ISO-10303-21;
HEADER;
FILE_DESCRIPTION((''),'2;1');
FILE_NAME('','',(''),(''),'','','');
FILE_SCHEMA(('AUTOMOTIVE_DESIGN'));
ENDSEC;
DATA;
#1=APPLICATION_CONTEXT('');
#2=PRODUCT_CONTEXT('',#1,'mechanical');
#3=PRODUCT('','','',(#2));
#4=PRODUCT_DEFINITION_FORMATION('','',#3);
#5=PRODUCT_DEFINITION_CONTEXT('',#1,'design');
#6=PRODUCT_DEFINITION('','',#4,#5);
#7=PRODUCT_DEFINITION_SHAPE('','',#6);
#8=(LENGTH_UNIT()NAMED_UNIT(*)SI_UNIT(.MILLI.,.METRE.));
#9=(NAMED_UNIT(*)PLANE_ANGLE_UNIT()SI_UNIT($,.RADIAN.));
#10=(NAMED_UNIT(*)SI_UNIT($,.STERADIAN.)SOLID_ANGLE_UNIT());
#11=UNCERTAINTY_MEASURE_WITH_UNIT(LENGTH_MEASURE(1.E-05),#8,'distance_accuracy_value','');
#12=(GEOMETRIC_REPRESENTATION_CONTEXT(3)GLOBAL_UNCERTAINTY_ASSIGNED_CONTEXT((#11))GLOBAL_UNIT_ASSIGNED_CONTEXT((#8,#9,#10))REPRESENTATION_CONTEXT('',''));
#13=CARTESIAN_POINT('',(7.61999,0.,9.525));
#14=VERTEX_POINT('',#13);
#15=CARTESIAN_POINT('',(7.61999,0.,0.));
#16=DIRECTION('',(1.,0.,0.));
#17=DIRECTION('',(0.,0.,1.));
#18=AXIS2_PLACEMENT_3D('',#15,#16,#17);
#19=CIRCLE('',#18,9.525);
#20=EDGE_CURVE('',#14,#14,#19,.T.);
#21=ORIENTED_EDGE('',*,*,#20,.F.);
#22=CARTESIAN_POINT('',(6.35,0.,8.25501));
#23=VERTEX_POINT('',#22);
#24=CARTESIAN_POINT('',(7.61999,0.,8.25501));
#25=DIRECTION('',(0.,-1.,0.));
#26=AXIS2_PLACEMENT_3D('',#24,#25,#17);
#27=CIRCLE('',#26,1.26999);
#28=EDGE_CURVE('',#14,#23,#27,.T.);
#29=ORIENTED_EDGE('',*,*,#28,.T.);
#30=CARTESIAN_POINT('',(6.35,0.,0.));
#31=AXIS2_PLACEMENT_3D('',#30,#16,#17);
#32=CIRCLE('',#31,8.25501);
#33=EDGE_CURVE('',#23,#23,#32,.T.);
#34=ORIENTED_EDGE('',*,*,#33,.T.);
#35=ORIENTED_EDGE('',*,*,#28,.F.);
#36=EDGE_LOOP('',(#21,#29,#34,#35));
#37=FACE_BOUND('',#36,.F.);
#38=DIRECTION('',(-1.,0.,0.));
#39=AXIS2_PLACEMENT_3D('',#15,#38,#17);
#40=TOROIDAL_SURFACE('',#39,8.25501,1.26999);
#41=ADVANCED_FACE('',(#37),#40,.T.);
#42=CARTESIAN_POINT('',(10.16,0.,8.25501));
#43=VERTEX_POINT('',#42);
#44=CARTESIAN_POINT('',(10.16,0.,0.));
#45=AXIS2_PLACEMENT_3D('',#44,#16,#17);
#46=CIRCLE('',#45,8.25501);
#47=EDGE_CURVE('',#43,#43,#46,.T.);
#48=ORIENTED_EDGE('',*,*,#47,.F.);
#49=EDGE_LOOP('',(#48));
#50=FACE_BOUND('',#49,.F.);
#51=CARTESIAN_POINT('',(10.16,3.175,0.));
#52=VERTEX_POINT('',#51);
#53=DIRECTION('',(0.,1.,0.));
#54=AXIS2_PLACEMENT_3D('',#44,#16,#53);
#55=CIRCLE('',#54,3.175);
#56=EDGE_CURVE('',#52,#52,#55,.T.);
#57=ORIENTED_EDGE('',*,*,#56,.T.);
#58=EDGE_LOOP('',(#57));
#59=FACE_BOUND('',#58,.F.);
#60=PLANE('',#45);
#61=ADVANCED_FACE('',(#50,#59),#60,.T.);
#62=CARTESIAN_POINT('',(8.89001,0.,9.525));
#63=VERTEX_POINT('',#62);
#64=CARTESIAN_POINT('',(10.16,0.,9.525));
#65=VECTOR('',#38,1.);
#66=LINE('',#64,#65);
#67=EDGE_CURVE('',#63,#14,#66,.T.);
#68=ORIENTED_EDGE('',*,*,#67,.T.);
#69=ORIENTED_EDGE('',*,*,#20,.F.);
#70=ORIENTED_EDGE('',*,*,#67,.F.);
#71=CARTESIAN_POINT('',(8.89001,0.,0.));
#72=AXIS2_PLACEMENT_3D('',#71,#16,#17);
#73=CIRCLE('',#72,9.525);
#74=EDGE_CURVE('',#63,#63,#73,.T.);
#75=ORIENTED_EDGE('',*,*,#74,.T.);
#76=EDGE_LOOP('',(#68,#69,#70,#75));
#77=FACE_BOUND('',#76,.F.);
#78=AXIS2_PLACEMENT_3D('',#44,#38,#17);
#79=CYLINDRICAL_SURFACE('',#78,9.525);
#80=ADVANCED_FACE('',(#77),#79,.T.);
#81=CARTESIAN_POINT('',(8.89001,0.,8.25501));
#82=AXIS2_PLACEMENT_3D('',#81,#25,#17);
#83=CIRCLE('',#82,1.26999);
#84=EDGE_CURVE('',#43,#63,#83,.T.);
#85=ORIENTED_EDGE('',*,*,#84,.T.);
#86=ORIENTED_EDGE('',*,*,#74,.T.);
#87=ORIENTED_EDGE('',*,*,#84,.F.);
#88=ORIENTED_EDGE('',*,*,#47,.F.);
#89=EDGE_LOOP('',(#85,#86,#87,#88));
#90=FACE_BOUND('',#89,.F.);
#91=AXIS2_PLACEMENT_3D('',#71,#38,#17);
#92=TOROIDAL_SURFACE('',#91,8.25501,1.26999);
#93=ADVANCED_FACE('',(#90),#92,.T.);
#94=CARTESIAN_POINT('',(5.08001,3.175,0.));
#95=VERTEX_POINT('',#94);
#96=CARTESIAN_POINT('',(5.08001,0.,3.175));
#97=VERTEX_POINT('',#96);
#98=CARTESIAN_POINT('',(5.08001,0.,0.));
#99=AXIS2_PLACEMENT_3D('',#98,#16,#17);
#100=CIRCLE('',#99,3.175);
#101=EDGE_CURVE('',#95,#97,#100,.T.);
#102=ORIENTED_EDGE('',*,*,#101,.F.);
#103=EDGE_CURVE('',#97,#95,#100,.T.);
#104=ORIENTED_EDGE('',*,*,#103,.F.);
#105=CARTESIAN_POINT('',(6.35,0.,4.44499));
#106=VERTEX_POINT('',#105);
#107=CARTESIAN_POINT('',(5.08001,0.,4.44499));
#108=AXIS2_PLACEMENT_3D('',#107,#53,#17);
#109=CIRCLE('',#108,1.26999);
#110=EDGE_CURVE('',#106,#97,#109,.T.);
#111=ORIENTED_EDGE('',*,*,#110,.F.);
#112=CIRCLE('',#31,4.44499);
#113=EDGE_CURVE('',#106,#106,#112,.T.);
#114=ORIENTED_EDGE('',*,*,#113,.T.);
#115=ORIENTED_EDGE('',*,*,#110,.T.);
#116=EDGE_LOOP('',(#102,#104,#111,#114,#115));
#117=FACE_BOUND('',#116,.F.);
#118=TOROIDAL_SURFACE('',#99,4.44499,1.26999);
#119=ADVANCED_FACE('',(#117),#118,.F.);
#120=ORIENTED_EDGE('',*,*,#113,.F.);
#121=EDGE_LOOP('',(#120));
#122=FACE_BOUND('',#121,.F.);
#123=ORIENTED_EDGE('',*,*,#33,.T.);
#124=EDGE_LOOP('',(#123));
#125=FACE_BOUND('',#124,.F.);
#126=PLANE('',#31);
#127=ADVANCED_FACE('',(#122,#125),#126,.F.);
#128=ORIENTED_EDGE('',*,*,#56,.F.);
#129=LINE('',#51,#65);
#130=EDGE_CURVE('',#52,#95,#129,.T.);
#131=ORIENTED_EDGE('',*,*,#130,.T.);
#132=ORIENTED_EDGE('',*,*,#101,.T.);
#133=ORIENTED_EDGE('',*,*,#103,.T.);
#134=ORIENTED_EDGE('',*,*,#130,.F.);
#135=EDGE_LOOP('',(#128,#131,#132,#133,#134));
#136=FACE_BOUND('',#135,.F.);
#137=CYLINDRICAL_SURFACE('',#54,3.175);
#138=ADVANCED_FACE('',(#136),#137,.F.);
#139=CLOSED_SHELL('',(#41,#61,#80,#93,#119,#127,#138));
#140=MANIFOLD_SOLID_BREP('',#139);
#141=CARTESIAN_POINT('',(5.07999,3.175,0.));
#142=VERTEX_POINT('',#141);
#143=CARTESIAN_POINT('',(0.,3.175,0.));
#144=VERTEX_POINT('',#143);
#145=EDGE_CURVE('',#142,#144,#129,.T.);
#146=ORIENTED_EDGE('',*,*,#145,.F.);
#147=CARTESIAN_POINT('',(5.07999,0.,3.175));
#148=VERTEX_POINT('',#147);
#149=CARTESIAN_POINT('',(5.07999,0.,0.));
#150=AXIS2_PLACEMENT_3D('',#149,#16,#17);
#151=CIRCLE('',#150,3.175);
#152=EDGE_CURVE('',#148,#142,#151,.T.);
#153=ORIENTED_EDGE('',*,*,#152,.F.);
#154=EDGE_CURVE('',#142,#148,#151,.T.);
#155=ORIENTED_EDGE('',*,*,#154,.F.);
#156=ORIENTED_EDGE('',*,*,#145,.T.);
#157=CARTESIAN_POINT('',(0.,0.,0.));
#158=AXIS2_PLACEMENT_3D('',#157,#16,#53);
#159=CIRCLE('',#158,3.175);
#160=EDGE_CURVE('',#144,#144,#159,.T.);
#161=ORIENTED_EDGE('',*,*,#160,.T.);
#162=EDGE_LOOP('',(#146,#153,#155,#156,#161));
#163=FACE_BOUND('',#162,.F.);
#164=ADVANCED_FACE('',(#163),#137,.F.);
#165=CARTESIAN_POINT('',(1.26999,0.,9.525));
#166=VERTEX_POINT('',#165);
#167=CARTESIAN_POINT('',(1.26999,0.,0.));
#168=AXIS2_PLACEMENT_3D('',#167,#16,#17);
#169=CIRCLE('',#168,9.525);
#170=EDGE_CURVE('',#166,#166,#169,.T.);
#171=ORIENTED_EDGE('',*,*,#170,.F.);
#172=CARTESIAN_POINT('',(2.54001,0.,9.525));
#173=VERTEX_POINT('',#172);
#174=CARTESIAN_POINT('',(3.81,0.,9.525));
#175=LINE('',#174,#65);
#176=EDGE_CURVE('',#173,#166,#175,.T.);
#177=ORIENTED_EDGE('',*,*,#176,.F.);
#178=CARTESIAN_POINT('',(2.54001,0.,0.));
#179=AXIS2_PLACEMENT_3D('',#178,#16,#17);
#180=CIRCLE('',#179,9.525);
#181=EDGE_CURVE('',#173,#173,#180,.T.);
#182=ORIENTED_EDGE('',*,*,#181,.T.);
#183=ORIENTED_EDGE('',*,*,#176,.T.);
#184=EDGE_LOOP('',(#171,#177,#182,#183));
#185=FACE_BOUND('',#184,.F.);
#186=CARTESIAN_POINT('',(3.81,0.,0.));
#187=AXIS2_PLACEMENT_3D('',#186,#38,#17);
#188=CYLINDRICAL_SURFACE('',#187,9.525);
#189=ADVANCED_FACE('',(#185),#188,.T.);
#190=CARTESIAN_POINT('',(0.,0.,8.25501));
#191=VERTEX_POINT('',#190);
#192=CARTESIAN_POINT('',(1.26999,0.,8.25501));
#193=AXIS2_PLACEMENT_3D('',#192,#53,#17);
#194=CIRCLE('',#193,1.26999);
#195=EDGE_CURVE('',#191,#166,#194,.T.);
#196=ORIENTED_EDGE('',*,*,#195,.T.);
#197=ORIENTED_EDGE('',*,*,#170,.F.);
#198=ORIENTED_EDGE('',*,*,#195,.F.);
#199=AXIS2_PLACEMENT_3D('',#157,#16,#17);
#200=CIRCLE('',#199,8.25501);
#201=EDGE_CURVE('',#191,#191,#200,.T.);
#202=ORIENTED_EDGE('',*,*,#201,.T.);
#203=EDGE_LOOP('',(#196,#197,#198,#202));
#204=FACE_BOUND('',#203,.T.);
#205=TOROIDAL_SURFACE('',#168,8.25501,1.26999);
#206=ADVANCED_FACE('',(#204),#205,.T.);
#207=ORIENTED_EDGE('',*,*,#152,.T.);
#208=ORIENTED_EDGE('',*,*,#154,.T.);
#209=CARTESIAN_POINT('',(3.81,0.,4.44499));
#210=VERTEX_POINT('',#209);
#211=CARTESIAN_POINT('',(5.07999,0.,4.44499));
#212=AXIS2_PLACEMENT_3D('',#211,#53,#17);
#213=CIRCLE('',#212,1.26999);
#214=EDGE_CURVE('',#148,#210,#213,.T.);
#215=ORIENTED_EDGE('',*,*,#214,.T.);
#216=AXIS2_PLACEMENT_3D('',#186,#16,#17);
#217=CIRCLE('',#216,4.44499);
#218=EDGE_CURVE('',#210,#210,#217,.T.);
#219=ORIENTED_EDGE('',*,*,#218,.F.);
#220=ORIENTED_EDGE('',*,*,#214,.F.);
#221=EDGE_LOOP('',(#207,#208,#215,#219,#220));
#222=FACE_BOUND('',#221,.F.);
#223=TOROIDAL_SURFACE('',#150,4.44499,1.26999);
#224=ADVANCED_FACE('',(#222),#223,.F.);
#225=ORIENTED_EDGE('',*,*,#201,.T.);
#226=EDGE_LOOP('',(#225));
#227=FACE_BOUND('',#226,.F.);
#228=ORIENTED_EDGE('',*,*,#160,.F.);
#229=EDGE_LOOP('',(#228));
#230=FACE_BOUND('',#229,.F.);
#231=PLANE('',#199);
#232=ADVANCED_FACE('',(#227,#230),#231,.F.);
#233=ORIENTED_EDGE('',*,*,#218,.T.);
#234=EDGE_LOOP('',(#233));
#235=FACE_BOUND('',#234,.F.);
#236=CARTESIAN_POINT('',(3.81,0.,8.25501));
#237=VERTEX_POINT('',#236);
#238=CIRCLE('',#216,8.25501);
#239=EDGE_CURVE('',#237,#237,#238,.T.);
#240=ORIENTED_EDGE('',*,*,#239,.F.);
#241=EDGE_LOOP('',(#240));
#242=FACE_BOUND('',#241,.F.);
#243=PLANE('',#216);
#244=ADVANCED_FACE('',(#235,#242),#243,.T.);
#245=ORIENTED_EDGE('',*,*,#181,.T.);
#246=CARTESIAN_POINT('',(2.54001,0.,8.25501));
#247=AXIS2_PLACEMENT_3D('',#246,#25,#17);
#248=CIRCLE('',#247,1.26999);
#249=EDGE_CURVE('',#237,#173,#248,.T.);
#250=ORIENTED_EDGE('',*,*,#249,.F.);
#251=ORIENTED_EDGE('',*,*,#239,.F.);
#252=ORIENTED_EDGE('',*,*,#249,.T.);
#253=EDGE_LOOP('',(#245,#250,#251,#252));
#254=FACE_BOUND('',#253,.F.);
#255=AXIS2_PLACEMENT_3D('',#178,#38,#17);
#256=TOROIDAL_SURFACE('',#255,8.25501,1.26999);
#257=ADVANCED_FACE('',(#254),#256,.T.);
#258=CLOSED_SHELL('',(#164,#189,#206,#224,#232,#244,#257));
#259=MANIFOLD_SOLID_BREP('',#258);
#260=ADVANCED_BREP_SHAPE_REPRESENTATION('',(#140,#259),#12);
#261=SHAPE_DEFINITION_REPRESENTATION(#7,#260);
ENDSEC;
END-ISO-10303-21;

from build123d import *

# Parameters (mm, degrees)
F2_R     = 1.26999
F3_R     = 3.175
F4_DEPTH = 25.4


# Not quite as in the source:
# - a fillet or chamfer is up to 0.001 mm smaller than in the source, because OpenCascade refuses the exact size


with BuildPart() as f1:
    # F0 (on Front) → F1 (revolve)
    with BuildSketch(Plane.XZ):
        Polygon((0, 9.525), (0, 0), (10.16, 0), (10.16, 9.525), (6.35, 9.525), (6.35, 3.175), (3.81, 3.175), (3.81, 9.525), align=None)
    revolve(axis=Axis((5.08, 0, 0), (1, 0, 0)))

    # F2 (radius 1.27 in the source; OpenCascade refuses exactly that, so slightly less here)
    f2_edges = [f1.edges().sort_by_distance(p)[0] for p in [
        (10.16, 0, -9.525),
        (6.35, 0, -9.525),
        (3.81, 0, -9.525),
        (0, 0, -9.525),
        (3.81, 0, -3.175),
        (6.35, 0, -3.175),
    ]]
    fillet(f2_edges, radius=F2_R)

    # F3 (on face) → F4 (cut)
    with BuildSketch(Plane.YZ.offset(10.16)):
        Circle(F3_R)
    extrude(amount=-F4_DEPTH, mode=Mode.SUBTRACT)


solid = f1.part
